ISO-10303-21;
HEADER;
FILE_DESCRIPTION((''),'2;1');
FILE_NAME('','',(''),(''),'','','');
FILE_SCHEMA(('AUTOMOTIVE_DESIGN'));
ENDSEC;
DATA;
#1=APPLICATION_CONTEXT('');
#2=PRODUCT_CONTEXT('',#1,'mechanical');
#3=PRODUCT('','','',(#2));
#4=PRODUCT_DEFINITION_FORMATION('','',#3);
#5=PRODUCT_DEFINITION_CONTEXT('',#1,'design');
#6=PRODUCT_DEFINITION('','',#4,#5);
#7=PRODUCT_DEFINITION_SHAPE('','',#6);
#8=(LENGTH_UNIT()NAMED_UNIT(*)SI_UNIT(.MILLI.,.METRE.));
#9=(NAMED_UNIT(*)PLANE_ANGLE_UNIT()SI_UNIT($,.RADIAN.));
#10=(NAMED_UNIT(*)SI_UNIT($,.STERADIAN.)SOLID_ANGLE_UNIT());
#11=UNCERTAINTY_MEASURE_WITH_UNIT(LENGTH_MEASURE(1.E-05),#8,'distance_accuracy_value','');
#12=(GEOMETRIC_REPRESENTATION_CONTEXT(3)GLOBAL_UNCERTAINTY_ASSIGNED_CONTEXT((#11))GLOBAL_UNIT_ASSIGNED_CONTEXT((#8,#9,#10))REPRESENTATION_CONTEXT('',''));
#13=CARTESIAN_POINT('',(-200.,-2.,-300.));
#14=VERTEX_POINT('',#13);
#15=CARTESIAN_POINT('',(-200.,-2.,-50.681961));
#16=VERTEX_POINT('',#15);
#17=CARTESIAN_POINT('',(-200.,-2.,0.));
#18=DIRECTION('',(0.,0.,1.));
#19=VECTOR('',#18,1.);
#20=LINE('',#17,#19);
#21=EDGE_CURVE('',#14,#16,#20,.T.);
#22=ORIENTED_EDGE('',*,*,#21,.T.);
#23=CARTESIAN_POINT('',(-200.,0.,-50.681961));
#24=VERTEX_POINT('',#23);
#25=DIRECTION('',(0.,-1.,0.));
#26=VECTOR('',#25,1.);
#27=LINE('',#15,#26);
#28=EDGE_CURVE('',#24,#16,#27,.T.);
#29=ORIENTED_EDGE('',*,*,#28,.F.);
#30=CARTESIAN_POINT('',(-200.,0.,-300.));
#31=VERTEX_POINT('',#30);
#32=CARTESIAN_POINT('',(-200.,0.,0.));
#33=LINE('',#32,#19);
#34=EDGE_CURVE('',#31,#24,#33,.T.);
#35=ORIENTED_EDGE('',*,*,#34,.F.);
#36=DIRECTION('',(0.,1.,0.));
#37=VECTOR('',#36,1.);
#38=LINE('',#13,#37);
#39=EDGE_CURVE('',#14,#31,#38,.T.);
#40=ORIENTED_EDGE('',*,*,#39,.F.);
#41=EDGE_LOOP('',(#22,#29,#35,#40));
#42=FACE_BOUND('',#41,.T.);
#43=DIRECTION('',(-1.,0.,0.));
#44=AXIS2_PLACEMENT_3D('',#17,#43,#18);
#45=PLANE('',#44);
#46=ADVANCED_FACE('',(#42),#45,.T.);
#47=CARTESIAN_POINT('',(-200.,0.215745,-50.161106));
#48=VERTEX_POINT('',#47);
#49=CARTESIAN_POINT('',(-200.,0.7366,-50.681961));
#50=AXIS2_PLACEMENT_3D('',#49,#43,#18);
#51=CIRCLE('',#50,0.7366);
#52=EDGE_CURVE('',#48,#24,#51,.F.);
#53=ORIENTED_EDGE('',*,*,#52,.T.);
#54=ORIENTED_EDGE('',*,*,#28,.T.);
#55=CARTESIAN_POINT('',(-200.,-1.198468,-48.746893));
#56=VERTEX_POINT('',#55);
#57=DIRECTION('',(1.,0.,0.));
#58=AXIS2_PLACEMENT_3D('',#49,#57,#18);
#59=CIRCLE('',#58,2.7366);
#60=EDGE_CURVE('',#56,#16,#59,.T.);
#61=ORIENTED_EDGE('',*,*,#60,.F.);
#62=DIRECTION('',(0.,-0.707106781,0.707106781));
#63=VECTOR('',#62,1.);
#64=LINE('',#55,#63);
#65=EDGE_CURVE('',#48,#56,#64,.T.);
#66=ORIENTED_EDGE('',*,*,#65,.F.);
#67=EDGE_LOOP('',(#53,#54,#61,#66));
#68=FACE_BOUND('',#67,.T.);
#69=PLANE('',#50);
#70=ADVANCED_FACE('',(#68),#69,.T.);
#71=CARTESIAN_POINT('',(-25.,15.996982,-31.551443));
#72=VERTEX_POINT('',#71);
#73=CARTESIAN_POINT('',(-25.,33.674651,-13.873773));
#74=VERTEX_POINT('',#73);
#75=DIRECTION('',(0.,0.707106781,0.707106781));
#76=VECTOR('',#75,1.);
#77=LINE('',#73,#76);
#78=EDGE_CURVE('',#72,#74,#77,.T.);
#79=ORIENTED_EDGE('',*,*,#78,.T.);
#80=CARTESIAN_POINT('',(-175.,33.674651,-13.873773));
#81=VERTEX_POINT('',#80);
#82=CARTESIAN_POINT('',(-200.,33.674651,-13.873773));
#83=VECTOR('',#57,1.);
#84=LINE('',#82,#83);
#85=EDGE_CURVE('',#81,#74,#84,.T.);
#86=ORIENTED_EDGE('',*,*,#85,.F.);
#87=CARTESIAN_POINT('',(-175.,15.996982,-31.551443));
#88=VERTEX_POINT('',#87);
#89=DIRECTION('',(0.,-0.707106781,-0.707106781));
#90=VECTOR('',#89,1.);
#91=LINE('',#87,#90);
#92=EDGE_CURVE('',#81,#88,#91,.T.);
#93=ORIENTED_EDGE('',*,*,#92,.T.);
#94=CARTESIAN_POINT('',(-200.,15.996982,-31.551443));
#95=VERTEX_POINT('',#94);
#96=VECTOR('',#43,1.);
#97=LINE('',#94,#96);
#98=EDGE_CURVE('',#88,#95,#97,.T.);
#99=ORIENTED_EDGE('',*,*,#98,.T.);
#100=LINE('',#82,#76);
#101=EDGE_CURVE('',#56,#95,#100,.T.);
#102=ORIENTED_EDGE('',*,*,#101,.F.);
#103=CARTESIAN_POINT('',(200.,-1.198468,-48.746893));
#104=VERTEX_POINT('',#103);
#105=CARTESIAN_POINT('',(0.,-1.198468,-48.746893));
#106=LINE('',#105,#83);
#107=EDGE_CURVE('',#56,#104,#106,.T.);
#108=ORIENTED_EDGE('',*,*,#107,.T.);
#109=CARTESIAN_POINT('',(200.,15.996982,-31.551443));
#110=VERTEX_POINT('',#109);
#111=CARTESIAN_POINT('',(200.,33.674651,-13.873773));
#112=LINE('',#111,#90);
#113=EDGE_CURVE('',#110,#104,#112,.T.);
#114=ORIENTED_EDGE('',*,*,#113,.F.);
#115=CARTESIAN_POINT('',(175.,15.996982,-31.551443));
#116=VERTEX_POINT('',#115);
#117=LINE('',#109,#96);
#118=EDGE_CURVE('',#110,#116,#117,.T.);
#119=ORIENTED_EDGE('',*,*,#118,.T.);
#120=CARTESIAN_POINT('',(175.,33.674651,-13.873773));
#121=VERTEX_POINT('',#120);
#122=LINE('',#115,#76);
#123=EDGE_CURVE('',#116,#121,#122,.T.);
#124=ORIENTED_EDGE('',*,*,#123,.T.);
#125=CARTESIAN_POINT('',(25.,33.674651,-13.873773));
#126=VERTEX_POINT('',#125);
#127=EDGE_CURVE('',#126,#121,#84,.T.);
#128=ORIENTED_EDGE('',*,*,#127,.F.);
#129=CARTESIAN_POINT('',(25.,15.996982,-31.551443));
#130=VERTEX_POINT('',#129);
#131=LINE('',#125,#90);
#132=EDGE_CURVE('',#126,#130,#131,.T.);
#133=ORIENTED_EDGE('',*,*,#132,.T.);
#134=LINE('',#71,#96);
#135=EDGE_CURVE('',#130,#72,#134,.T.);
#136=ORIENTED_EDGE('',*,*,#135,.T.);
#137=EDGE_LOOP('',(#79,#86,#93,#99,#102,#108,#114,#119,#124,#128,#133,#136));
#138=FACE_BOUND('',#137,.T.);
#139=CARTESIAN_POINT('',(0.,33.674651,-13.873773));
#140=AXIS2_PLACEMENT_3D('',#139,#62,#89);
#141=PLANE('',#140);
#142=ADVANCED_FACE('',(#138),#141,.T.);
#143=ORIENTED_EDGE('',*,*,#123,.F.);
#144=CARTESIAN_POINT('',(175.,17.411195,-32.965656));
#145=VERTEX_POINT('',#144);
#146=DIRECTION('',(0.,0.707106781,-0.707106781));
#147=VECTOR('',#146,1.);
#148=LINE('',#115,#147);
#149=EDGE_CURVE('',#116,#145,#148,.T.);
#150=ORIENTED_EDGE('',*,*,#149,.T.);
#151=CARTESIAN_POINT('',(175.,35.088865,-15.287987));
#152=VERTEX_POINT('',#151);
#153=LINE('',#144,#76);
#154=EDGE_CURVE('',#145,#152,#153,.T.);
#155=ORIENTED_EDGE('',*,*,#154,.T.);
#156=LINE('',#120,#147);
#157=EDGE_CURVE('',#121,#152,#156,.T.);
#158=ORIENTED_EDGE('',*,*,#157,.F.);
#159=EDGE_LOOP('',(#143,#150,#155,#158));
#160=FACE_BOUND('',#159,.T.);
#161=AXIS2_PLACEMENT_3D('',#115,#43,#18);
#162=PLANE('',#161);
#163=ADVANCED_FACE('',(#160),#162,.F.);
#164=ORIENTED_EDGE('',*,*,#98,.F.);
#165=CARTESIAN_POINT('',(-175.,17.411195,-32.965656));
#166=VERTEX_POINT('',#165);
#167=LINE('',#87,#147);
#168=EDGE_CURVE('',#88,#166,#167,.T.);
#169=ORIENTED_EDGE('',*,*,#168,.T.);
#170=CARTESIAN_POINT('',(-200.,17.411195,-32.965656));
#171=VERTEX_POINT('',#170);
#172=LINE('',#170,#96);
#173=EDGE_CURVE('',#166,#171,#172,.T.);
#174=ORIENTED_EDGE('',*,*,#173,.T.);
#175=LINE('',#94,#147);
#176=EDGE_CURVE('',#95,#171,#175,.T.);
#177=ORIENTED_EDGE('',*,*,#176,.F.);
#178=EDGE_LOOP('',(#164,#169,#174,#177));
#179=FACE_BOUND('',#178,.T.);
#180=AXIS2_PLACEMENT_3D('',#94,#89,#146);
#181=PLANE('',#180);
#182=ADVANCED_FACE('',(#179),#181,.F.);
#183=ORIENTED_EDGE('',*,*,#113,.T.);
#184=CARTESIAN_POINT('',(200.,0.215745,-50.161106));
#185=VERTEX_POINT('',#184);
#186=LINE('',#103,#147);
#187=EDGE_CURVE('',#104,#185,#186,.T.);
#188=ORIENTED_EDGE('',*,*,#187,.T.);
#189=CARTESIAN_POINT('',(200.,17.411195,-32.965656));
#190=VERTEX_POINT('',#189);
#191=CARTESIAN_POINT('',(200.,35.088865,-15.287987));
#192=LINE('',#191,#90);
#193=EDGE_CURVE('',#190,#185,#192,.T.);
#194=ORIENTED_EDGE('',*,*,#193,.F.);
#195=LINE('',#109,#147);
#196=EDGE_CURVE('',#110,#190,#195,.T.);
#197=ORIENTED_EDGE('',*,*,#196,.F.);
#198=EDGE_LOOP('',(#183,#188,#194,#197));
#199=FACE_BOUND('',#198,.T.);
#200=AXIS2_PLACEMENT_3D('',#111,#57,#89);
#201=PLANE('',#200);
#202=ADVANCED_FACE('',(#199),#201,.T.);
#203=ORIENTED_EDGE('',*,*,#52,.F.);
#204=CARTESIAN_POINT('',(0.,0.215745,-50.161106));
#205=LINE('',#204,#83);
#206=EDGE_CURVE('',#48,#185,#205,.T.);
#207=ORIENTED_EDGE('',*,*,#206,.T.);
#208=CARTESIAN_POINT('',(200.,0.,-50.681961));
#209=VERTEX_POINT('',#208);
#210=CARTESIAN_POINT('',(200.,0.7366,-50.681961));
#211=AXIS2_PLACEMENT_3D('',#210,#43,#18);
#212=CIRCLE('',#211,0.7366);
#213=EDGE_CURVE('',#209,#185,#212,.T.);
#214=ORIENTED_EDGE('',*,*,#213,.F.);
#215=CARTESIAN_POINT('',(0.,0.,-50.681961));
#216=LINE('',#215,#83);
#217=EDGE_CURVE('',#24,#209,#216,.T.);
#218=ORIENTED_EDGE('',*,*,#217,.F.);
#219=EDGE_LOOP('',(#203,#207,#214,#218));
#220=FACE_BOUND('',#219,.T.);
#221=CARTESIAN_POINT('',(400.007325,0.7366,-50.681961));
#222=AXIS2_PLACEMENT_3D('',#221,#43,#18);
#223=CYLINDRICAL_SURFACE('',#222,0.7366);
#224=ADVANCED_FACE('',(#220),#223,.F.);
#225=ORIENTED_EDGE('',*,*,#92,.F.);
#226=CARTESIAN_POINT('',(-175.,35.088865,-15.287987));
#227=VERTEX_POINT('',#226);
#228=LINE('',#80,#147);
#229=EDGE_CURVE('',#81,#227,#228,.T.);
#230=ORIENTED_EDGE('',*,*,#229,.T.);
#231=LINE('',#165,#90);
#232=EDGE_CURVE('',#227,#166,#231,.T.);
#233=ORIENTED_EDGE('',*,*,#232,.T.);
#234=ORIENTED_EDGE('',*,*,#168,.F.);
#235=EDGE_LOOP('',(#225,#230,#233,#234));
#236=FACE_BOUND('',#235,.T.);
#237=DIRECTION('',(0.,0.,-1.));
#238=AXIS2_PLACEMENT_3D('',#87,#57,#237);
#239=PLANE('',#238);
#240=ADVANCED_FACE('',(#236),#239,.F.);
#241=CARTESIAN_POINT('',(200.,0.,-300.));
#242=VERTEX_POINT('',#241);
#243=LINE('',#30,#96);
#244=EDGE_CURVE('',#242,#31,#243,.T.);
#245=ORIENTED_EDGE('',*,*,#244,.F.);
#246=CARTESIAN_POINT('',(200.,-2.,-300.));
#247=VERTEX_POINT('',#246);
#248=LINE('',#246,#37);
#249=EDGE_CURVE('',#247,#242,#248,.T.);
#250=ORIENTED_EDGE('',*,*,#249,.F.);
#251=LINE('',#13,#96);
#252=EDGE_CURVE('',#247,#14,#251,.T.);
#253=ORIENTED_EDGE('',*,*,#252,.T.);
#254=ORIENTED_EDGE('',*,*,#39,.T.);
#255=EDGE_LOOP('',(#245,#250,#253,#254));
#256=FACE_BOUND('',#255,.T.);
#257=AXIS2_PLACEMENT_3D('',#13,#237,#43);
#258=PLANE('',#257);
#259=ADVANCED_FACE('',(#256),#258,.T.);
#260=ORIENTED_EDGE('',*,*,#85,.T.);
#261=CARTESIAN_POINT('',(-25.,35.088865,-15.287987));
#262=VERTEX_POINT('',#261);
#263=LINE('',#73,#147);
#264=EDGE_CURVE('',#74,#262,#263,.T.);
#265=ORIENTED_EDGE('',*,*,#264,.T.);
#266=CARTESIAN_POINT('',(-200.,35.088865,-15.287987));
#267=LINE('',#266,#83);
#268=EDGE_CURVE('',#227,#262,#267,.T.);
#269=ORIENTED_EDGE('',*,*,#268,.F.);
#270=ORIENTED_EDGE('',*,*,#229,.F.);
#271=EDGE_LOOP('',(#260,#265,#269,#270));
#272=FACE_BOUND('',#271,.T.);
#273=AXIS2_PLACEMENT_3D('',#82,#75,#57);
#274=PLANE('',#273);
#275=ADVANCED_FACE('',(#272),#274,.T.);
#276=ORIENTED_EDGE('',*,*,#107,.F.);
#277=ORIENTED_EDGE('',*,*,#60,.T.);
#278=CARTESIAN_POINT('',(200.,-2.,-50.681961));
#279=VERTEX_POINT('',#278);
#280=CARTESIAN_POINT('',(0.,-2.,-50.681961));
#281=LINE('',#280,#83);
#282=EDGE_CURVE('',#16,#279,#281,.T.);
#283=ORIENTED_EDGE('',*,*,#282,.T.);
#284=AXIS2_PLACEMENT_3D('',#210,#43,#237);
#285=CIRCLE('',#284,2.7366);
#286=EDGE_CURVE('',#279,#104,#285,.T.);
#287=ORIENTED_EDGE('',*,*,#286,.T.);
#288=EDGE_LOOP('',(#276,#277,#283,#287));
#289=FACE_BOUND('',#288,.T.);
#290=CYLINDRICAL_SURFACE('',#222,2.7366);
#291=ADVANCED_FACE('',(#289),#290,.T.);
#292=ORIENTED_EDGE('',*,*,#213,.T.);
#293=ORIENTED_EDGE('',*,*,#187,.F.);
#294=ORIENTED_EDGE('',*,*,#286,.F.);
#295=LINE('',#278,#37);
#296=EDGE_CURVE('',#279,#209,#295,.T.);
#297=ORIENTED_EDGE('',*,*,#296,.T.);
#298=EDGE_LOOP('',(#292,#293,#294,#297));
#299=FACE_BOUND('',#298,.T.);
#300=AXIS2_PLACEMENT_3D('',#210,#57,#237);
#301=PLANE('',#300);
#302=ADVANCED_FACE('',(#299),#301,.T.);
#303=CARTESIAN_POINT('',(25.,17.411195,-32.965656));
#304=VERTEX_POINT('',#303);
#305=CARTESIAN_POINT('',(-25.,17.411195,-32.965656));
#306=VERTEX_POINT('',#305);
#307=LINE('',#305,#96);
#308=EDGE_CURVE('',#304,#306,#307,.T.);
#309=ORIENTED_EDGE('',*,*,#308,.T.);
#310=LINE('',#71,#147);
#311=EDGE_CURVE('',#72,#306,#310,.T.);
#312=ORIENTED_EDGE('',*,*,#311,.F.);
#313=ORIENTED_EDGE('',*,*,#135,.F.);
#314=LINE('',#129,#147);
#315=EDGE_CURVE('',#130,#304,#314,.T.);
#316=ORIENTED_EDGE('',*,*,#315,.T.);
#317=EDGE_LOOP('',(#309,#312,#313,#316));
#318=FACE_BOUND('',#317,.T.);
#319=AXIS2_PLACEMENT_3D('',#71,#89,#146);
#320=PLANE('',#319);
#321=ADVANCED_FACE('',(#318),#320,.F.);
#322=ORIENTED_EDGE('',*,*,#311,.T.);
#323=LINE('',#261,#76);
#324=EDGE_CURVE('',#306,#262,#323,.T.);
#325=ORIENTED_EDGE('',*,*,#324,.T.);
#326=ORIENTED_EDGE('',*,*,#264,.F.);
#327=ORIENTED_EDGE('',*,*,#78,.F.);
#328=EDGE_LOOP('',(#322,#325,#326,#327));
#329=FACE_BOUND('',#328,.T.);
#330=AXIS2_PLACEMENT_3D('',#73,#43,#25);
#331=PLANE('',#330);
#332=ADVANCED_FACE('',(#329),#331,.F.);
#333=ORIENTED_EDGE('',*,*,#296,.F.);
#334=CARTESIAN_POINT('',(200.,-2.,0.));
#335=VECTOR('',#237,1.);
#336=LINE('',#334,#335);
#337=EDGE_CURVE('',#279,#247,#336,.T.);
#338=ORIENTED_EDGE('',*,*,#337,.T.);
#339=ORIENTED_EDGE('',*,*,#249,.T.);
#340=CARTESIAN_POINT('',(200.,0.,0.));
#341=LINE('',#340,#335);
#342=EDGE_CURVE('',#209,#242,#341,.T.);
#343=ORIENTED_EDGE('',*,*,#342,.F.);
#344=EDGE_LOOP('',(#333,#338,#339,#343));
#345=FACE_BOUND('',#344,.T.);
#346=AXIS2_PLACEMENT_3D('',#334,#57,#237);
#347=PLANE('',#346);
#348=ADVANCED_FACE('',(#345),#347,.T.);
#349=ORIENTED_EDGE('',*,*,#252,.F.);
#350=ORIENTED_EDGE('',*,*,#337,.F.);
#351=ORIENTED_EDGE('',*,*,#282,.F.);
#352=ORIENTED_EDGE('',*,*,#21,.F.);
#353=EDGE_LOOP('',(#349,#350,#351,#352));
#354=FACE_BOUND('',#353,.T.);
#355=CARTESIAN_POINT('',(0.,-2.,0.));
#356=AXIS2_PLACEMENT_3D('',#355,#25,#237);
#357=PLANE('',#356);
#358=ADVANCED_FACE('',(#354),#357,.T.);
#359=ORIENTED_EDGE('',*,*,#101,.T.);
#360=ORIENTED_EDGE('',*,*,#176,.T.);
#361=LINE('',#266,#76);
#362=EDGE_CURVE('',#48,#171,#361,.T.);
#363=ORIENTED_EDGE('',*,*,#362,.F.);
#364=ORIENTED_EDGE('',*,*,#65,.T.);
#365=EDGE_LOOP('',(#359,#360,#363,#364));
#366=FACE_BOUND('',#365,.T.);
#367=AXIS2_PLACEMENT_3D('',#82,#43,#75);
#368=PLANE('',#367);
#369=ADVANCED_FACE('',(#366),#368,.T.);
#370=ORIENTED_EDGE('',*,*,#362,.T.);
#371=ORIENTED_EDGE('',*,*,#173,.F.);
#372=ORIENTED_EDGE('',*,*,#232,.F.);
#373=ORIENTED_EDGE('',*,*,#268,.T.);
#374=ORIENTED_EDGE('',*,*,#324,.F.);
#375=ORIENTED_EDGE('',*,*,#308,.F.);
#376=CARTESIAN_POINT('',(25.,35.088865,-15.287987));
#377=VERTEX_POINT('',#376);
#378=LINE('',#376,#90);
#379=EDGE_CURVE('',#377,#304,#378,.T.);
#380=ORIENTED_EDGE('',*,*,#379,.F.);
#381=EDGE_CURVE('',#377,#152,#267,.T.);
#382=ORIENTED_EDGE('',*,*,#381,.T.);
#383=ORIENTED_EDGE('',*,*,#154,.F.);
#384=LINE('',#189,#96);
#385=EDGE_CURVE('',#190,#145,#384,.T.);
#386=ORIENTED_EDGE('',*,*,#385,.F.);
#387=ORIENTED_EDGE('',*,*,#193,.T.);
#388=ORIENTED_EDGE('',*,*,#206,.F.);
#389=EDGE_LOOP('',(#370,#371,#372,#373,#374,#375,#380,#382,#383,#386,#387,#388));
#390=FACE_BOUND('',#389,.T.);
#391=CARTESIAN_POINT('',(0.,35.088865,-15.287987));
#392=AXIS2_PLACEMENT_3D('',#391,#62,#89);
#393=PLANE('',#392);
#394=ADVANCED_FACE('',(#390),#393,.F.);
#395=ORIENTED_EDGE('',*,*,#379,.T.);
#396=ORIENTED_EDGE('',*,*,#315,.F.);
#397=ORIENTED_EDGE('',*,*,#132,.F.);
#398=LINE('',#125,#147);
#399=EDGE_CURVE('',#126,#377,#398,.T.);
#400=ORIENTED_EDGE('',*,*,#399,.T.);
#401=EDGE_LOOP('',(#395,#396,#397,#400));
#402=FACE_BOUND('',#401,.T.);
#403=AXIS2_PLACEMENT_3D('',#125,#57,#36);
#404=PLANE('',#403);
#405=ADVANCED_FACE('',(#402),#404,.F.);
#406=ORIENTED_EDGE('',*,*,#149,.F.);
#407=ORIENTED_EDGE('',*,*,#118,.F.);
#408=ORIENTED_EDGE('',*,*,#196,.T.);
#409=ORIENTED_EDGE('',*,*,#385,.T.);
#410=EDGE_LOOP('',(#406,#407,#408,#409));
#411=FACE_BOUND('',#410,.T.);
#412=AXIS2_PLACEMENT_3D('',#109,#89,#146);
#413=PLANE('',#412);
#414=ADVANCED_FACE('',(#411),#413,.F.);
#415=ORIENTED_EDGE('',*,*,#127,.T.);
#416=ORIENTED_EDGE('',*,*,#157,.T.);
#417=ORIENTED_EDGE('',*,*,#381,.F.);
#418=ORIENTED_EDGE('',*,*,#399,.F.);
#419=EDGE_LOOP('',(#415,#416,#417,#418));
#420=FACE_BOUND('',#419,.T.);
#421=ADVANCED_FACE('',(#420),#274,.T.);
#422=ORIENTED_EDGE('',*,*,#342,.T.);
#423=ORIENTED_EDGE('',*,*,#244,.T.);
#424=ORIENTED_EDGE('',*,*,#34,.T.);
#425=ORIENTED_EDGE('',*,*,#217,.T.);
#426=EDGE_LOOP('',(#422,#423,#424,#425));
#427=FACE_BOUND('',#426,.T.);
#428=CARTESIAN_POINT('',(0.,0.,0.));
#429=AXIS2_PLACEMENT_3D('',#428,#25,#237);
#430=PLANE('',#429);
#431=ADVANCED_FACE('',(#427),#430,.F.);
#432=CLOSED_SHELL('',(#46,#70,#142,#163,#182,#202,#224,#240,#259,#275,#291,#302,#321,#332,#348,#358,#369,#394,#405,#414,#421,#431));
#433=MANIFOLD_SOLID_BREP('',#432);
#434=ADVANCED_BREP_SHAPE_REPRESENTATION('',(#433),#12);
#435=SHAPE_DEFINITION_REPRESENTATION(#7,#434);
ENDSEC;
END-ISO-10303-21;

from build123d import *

# Parameters (mm, degrees)
ESBO_O1_W               = 400
ESBO_O1_H               = 300
FLANGE_BASE1_DEPTH      = 2
DOBRA_START             = -200
DOBRA_ESBO_ADA1_DEPTH   = 400
DOBRA_ESBO_ADA1_2_DEPTH = 400
ESBO_O9_W               = 25
ESBO_O9_H               = 25
ESBO_O9_W_2             = 50
CORTE_EXTRUS_O1_DEPTH   = 2


# Read off the part's stored shape, not the designer's step: Dobra esboçada1
# Sheet-metal steps are written as plain solids
with BuildPart() as part:
    # Esboço1 → Flange-base1 (new body)
    with BuildSketch(Plane(origin=(0, 0, 0), x_dir=(1, 0, 0), z_dir=(0, 1, 0))):
        with Locations((0, 150)):
            Rectangle(ESBO_O1_W, ESBO_O1_H)
    extrude(amount=-FLANGE_BASE1_DEPTH)

    # Dobra esboçada1 outline → Dobra esboçada1 (cut)
    with BuildSketch(Plane.YZ.offset(DOBRA_START)):
        with BuildLine():
            Line((-1.198468417, -48.746892808), (0, -47.548424391))
            Line((0, -47.548424391), (0, 0))
            Line((0, 0), (-2, 0))
            Line((-2, 0), (-2, -50.681961225))
            ThreePointArc((-2, -50.681961225), (-1.791688729, -49.634709744), (-1.198468417, -48.746892808))
        make_face()
    extrude(amount=DOBRA_ESBO_ADA1_DEPTH, mode=Mode.SUBTRACT)

    # Dobra esbo_ada1 2 outline → Dobra esbo_ada1 2 (add)
    with BuildSketch(Plane.YZ.offset(DOBRA_START)):
        with BuildLine():
            Line((35.088864797, -15.287986718), (33.674651235, -13.873773155))
            Line((33.674651235, -13.873773155), (0, -47.548424391))
            Line((0, -47.548424391), (0, -50.681961225))
            ThreePointArc((0, -50.681961225), (0.056070336, -50.400076609), (0.215745145, -50.16110637))
            Line((0.215745145, -50.16110637), (35.088864797, -15.287986718))
        make_face()
    extrude(amount=DOBRA_ESBO_ADA1_2_DEPTH)

    # Esboço9 → Corte-extrusão1 (cut)
    with BuildSketch(Plane(origin=(0, 25.188425758, -25.188425758), x_dir=(1, 0, 0), z_dir=(0, 0.7071067811865464, -0.7071067811865488))):
        with Locations((-187.5, -1.501335164)):
            Rectangle(ESBO_O9_W, ESBO_O9_H)
        with Locations((0, -1.501335164)):
            Rectangle(ESBO_O9_W_2, ESBO_O9_H)
        with Locations((187.5, -1.501335164)):
            Rectangle(ESBO_O9_W, ESBO_O9_H)
    extrude(amount=-CORTE_EXTRUS_O1_DEPTH, mode=Mode.SUBTRACT)


solid = part.part
